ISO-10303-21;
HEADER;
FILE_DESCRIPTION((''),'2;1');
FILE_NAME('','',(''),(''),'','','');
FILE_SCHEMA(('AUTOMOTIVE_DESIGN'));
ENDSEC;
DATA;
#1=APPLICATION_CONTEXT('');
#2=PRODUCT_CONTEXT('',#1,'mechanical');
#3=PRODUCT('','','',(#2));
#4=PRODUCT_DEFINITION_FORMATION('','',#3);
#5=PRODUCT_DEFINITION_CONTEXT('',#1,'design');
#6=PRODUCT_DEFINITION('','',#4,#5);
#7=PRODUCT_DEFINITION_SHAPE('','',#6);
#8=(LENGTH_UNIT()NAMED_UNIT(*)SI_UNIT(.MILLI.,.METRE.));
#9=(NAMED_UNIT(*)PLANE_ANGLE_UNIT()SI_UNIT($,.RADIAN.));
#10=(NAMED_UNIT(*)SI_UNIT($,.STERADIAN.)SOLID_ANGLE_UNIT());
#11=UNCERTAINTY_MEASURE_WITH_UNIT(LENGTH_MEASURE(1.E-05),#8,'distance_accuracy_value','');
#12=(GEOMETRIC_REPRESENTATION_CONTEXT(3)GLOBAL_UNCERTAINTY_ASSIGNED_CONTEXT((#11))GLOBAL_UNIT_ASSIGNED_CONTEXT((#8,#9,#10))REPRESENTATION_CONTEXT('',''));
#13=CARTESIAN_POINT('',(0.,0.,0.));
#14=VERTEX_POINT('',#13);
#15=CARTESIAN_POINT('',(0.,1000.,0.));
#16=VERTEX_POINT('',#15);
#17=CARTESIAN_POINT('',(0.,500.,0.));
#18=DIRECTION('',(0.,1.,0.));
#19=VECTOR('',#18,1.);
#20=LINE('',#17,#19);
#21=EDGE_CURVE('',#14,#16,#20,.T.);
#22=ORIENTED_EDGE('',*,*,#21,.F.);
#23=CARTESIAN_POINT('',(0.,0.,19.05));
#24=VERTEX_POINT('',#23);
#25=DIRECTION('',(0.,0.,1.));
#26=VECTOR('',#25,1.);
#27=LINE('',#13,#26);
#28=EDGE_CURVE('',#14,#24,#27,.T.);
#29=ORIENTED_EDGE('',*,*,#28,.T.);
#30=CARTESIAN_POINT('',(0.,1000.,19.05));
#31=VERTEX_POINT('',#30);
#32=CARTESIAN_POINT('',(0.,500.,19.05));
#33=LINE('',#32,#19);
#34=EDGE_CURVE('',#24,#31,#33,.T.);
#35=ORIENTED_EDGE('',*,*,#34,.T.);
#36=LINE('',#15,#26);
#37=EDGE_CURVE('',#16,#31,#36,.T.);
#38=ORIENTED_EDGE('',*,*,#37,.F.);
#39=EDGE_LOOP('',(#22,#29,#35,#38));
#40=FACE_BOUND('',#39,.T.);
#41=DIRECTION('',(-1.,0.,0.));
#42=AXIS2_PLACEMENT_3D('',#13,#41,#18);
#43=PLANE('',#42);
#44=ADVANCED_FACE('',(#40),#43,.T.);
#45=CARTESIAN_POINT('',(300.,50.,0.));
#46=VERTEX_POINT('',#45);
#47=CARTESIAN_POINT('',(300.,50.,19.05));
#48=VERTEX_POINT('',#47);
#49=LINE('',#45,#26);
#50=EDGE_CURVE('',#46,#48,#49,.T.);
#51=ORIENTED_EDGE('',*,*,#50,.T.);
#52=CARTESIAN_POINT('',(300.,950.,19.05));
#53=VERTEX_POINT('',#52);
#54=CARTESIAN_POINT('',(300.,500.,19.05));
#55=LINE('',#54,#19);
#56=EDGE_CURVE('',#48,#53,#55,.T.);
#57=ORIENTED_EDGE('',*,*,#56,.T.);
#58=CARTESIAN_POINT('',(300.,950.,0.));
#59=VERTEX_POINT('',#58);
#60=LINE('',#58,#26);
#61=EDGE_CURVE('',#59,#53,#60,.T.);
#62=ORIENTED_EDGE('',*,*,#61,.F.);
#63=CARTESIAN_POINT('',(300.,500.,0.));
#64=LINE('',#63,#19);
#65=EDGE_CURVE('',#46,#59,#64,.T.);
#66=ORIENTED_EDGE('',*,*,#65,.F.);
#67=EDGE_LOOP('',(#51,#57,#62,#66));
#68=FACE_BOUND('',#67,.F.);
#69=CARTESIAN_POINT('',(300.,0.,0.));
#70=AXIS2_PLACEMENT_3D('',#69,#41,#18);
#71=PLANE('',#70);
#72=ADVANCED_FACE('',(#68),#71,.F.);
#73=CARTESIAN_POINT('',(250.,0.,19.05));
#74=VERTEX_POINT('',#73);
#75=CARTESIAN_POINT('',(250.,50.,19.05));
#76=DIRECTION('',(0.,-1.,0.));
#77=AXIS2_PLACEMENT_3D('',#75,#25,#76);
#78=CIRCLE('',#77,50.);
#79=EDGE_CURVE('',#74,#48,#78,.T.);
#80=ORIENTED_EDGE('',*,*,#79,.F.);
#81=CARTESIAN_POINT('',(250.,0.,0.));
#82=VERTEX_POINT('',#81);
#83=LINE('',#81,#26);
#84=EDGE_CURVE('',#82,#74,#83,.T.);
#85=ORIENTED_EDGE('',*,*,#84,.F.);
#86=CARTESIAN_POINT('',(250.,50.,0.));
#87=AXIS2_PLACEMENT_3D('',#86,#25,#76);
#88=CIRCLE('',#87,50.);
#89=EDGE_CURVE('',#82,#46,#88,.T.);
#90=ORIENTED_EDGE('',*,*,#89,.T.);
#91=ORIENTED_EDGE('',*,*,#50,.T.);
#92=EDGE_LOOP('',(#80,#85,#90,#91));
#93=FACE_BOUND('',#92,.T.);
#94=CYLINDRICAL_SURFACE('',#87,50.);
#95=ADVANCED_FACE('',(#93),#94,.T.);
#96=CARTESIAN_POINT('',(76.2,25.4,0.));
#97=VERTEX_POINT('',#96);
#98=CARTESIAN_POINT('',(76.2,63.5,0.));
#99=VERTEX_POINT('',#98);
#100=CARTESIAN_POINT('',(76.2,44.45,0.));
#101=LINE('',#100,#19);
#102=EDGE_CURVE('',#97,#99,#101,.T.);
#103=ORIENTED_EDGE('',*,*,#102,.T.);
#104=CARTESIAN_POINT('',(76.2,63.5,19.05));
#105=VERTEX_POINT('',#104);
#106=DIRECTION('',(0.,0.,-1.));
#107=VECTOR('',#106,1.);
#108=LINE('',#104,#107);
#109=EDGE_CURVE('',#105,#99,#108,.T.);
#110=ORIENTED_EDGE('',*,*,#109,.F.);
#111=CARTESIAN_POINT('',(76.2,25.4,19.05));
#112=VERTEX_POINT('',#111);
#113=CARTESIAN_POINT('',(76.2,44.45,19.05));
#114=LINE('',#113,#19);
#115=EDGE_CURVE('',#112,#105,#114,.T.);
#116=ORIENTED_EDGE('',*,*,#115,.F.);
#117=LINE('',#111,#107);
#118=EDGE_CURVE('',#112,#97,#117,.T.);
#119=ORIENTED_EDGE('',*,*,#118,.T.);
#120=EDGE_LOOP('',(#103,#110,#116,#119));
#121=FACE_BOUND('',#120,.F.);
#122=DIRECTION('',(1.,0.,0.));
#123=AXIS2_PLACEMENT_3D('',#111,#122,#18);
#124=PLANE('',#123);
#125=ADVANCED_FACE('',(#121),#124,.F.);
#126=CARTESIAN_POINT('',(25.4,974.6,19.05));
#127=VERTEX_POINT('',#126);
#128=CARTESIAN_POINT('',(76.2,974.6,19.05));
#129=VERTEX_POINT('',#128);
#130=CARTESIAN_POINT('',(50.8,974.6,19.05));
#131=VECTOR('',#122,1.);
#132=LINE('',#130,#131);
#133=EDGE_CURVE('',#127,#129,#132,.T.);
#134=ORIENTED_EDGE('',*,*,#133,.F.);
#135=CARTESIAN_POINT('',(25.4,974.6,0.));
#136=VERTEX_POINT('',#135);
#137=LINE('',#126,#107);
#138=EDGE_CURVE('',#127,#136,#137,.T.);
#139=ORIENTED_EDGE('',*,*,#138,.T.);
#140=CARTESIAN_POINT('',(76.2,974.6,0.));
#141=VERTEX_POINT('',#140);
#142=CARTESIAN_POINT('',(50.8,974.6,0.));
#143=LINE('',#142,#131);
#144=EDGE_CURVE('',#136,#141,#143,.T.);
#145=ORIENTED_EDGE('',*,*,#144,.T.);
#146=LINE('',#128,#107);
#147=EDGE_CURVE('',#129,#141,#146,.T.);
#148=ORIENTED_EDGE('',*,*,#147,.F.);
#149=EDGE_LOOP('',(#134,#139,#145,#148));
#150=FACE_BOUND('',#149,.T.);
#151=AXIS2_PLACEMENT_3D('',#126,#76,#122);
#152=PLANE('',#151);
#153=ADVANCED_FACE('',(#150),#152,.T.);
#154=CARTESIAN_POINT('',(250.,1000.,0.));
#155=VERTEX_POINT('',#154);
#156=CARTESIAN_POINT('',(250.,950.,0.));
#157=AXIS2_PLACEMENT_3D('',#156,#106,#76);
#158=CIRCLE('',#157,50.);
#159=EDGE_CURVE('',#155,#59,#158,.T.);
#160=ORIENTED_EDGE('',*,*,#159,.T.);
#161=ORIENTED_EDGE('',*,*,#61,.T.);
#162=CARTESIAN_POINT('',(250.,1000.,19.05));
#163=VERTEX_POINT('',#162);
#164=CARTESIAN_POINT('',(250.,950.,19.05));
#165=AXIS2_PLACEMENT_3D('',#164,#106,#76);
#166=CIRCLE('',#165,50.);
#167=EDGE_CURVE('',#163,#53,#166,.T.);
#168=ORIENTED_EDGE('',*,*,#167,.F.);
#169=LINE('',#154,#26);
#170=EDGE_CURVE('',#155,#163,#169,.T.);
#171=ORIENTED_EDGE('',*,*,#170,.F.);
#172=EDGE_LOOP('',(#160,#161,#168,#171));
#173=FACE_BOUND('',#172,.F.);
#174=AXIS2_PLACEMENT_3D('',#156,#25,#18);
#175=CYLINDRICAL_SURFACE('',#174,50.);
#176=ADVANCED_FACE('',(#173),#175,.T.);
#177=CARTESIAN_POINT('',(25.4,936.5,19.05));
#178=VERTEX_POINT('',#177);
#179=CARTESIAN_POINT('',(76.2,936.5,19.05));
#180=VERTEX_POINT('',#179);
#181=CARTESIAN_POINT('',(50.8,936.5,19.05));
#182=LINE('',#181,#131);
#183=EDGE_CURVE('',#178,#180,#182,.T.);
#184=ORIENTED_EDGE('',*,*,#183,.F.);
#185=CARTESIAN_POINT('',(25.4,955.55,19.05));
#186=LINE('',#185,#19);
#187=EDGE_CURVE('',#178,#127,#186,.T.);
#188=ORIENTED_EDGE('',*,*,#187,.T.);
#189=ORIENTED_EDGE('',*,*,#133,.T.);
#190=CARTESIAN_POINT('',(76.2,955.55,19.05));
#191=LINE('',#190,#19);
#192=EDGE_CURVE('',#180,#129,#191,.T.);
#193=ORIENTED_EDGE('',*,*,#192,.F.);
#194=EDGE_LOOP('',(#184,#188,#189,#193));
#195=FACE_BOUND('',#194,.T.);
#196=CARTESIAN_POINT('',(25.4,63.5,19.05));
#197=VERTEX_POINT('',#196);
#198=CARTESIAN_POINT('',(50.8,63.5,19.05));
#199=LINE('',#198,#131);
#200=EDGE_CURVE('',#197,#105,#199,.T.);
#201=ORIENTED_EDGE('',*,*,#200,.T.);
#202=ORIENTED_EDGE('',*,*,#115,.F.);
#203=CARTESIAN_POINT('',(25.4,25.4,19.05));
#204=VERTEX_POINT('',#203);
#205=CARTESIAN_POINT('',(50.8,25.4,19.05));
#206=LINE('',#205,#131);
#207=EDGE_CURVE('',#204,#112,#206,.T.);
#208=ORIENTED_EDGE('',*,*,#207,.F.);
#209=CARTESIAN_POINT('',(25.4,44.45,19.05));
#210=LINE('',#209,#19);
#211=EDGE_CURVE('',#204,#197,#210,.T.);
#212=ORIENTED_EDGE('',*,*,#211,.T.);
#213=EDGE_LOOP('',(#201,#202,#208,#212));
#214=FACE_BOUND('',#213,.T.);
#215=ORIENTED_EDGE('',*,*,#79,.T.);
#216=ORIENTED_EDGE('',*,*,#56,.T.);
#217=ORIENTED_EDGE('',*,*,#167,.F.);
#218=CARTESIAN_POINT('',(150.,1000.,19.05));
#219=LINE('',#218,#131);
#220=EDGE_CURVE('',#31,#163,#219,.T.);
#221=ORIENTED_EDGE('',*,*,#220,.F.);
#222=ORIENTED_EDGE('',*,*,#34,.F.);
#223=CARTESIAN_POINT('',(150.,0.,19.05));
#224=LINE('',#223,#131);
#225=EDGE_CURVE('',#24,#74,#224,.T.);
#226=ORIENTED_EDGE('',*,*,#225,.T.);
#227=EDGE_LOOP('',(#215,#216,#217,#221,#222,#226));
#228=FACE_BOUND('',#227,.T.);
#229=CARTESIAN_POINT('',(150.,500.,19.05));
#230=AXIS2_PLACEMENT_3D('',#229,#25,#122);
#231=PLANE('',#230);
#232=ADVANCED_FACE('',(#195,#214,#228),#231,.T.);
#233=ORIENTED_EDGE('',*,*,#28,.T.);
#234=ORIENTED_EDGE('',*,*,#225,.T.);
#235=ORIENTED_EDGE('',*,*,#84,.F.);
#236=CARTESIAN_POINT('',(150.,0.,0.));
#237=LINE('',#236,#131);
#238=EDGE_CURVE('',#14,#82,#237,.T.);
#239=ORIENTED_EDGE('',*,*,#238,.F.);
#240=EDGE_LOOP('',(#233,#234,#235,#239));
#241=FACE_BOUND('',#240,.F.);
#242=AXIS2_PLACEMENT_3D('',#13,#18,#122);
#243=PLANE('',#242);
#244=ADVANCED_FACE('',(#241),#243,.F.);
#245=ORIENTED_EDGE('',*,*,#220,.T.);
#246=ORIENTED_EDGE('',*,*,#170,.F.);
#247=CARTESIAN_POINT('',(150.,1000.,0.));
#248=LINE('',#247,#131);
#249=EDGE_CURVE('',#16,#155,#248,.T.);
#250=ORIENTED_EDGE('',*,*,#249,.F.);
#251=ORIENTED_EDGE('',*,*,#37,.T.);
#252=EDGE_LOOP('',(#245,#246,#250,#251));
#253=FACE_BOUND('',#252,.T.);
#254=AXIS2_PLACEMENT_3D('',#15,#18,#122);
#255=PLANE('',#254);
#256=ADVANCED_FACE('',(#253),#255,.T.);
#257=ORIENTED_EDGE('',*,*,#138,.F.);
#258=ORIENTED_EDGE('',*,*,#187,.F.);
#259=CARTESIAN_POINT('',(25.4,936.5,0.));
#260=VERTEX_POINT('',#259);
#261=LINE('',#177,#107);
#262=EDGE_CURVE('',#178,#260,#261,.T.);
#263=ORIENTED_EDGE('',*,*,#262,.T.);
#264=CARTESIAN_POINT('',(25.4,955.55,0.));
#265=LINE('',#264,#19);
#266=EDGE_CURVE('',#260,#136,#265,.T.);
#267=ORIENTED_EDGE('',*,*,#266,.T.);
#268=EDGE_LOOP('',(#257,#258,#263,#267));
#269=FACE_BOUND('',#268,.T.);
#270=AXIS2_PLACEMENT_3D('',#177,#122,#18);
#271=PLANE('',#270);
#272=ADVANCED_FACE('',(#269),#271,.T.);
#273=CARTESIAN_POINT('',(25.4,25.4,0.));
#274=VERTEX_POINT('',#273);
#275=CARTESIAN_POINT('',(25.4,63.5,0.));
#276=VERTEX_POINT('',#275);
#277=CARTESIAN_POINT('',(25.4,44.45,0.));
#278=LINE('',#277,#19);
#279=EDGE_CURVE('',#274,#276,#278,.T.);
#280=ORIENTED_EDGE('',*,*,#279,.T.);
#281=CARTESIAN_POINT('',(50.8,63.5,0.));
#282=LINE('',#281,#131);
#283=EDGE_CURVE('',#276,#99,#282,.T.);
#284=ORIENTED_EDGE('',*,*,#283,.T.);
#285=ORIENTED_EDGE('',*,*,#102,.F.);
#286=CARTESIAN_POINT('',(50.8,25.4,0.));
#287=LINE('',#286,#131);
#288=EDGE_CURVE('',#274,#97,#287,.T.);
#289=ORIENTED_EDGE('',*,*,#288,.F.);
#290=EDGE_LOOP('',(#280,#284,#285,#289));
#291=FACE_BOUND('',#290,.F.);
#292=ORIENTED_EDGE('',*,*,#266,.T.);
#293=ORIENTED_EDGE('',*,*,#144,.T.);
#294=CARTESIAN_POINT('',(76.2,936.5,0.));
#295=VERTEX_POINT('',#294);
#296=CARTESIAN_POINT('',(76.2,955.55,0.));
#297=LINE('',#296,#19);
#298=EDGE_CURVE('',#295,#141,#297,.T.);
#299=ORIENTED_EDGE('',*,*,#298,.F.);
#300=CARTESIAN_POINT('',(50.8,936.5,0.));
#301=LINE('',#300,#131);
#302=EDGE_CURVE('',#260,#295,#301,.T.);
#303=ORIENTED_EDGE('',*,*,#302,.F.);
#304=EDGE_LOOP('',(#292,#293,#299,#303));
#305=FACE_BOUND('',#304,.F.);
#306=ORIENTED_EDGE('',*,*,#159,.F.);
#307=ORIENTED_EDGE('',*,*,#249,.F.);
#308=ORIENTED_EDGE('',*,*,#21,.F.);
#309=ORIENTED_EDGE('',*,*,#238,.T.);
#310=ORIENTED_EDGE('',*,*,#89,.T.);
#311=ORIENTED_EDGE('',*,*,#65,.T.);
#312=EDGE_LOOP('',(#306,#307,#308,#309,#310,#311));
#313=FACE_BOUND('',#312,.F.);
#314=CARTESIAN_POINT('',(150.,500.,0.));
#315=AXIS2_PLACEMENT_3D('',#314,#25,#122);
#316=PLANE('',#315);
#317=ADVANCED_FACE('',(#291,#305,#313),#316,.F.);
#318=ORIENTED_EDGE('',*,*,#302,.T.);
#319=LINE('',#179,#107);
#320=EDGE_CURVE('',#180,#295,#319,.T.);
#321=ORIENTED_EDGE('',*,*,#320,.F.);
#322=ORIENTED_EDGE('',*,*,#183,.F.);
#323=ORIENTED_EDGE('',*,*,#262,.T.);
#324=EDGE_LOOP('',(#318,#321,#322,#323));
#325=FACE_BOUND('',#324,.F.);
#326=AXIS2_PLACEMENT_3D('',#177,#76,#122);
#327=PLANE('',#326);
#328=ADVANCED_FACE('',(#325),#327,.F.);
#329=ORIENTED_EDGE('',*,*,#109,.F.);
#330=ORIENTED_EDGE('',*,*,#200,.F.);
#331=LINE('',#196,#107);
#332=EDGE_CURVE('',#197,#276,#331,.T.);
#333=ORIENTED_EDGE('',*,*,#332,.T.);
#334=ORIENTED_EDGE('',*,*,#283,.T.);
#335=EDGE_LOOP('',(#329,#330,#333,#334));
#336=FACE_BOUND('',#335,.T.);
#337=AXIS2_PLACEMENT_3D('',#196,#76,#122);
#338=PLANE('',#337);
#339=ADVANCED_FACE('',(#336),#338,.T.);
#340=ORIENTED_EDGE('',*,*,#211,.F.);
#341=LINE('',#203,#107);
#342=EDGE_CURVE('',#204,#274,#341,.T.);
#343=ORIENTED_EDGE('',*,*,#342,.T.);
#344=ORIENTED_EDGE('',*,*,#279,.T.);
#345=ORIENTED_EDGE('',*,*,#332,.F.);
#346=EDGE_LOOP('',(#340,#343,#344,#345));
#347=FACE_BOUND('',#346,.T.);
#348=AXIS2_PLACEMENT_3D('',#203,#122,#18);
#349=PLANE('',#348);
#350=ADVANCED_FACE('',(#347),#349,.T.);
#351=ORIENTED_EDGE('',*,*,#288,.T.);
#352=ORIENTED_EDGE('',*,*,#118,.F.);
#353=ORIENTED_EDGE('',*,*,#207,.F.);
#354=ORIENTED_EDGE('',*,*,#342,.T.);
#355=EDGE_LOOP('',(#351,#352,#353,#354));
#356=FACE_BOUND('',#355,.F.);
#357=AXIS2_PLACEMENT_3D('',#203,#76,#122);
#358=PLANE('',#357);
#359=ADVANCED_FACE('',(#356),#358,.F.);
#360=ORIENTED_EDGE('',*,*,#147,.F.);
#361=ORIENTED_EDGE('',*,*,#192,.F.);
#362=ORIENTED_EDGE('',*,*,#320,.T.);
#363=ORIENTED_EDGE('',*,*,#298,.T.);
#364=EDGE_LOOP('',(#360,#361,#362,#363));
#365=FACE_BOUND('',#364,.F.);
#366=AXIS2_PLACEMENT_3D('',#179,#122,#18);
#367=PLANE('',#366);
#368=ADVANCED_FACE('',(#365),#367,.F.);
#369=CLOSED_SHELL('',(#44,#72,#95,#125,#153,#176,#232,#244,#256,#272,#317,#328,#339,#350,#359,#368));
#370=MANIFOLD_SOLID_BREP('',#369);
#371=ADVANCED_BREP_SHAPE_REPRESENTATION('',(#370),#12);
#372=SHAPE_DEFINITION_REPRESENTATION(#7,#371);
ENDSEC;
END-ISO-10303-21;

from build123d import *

# Parameters (mm, degrees)
F0_W     = 300
F0_H     = 1000
F1_DEPTH = 19.05
F2_W     = 50.8
F2_H     = 38.1
F3_DEPTH = 19.05
F4_R     = 50


# Not quite as in the source:
# - a length typed as a fraction of an inch, garbled in the dataset ("3 / 203.2 mm" for 3/8 in), is restored


with BuildPart() as f1:
    # F0 (on Top) → F1 (new body)
    with BuildSketch(Plane.XY):
        with Locations((150, 500)):
            Rectangle(F0_W, F0_H)
    extrude(amount=F1_DEPTH)

    # F2 (on face) → F3 (cut, through all)
    with BuildSketch(Plane.XY.offset(19.05)):
        with Locations((50.8, 44.45)):
            Rectangle(F2_W, F2_H)
        with Locations((50.8, 955.55)):
            Rectangle(F2_W, F2_H)
    extrude(amount=-F3_DEPTH, mode=Mode.SUBTRACT)

    # F4
    f4_edges = [f1.edges().sort_by_distance(p)[0] for p in [
        (300, 0, 9.525),
        (300, 1000, 9.525),
    ]]
    fillet(f4_edges, radius=F4_R)


solid = f1.part
